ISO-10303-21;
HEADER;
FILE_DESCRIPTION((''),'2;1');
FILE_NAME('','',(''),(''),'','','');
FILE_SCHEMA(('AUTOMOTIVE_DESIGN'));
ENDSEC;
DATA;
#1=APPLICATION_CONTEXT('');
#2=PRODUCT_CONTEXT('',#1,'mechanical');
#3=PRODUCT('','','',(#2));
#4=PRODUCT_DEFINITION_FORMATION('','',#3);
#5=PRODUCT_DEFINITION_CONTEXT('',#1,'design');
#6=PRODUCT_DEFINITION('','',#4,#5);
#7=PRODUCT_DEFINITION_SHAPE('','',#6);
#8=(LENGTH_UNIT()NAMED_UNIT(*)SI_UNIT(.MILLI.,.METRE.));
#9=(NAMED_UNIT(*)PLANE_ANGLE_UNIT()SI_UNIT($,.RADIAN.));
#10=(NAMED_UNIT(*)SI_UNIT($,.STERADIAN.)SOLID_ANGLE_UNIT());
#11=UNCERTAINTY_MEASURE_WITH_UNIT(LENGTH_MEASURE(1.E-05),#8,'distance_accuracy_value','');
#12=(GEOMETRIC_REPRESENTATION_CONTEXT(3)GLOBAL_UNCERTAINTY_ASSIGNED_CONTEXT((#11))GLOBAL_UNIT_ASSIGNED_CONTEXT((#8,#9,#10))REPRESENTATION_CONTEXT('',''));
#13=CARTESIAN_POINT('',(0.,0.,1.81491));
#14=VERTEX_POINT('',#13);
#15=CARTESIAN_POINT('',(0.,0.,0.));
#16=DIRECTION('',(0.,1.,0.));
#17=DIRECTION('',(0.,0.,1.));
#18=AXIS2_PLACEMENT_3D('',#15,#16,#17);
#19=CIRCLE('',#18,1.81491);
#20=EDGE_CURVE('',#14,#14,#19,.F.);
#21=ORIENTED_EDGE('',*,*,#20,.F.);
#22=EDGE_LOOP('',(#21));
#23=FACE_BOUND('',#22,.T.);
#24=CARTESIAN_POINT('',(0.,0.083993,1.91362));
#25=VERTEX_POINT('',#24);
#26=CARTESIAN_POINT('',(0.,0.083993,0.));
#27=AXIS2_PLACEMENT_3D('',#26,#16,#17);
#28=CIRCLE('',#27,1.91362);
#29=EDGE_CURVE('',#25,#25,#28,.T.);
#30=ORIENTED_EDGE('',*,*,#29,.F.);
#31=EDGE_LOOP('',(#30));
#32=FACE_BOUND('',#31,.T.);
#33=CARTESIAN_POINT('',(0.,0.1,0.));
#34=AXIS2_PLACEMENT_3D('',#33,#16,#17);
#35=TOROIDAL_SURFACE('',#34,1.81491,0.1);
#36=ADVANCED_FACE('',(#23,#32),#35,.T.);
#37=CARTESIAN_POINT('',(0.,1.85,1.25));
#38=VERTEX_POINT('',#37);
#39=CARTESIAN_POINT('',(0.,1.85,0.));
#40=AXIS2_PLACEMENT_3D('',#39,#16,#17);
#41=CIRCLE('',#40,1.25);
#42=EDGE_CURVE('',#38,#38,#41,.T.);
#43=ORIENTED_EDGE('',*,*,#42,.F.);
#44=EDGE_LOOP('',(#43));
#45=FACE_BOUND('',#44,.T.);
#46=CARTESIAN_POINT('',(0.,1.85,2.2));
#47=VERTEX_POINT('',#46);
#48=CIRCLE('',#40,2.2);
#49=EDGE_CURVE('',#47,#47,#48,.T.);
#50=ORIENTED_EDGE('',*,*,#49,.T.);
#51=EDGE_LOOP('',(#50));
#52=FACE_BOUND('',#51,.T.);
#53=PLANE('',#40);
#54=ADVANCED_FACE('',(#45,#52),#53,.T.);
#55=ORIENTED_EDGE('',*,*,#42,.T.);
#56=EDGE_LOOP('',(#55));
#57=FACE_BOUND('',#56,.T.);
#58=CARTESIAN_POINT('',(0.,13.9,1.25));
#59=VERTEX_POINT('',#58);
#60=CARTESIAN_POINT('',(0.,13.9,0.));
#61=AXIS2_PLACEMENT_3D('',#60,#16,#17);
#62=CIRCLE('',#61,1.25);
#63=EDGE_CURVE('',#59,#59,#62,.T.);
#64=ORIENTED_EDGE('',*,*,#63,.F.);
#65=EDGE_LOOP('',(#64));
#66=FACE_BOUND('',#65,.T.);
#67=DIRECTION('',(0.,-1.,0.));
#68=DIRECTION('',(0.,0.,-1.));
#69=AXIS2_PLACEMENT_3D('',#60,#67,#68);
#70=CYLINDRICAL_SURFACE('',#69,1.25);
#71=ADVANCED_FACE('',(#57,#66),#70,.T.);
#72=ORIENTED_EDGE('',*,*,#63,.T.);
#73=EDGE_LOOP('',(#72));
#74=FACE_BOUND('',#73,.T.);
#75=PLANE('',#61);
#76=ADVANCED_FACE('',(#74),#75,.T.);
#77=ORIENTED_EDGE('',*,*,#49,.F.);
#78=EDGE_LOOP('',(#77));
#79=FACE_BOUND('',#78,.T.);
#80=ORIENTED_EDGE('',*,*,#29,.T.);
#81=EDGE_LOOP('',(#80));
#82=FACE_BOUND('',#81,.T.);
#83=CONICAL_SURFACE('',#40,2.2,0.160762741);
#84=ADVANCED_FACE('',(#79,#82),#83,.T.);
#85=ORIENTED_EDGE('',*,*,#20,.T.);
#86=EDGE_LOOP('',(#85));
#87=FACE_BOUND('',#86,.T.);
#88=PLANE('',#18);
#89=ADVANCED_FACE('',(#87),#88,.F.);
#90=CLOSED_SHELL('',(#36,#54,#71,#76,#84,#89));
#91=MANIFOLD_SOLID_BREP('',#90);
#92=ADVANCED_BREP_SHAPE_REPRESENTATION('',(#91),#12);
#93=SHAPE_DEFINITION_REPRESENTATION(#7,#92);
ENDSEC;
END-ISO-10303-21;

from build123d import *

# Parameters (mm, degrees)
ESQUISSE1_R        = 2.2
BOSS_EXTRU_1_DEPTH = 1.85
ESQUISSE2_R        = 1.25
BOSS_EXTRU_2_DEPTH = 12.05
CHANFREIN1_SIZE    = 1.85
CHANFREIN1_SIZE_2  = 0.3
CONG_1_R           = 0.1


with BuildPart() as part:
    # Esquisse1 → Boss.-Extru.1 (new body)
    with BuildSketch(Plane(origin=(0, 0, 0), x_dir=(1, 0, 0), z_dir=(0, 1, 0))):
        with Locations(Location((0, 0, 0), (0, 0, 270))):
            Circle(ESQUISSE1_R)
    extrude(amount=BOSS_EXTRU_1_DEPTH)

    # Esquisse2 → Boss.-Extru.2 (add)
    with BuildSketch(Plane(origin=(0, 1.85, 0), x_dir=(1, 0, 0), z_dir=(0, 1, 0))):
        with Locations(Location((0, 0, 0), (0, 0, 270))):
            Circle(ESQUISSE2_R)
    extrude(amount=BOSS_EXTRU_2_DEPTH)

    # Chanfrein1
    # the kernel refuses this chamfer: 1.85, 0.3 mm, written as the material it takes off along each edge
    with BuildSketch(Plane(origin=(0, 0, 0), x_dir=(0, 0, 1), z_dir=(-1, 0, 0))) as chanfrein1_piece_1:
        Polygon((2.2, CHANFREIN1_SIZE), (2.2 - CHANFREIN1_SIZE_2, 0), (2.2, 0), align=None)
    revolve(axis=Axis((0, 0, 0), (0, 1, 0)), mode=Mode.SUBTRACT)

    # Congé1
    cong_1_edges = [part.edges().sort_by_distance(p)[0] for p in [
        (0, 0, -1.9),
    ]]
    fillet(cong_1_edges, radius=CONG_1_R)


solid = part.part
